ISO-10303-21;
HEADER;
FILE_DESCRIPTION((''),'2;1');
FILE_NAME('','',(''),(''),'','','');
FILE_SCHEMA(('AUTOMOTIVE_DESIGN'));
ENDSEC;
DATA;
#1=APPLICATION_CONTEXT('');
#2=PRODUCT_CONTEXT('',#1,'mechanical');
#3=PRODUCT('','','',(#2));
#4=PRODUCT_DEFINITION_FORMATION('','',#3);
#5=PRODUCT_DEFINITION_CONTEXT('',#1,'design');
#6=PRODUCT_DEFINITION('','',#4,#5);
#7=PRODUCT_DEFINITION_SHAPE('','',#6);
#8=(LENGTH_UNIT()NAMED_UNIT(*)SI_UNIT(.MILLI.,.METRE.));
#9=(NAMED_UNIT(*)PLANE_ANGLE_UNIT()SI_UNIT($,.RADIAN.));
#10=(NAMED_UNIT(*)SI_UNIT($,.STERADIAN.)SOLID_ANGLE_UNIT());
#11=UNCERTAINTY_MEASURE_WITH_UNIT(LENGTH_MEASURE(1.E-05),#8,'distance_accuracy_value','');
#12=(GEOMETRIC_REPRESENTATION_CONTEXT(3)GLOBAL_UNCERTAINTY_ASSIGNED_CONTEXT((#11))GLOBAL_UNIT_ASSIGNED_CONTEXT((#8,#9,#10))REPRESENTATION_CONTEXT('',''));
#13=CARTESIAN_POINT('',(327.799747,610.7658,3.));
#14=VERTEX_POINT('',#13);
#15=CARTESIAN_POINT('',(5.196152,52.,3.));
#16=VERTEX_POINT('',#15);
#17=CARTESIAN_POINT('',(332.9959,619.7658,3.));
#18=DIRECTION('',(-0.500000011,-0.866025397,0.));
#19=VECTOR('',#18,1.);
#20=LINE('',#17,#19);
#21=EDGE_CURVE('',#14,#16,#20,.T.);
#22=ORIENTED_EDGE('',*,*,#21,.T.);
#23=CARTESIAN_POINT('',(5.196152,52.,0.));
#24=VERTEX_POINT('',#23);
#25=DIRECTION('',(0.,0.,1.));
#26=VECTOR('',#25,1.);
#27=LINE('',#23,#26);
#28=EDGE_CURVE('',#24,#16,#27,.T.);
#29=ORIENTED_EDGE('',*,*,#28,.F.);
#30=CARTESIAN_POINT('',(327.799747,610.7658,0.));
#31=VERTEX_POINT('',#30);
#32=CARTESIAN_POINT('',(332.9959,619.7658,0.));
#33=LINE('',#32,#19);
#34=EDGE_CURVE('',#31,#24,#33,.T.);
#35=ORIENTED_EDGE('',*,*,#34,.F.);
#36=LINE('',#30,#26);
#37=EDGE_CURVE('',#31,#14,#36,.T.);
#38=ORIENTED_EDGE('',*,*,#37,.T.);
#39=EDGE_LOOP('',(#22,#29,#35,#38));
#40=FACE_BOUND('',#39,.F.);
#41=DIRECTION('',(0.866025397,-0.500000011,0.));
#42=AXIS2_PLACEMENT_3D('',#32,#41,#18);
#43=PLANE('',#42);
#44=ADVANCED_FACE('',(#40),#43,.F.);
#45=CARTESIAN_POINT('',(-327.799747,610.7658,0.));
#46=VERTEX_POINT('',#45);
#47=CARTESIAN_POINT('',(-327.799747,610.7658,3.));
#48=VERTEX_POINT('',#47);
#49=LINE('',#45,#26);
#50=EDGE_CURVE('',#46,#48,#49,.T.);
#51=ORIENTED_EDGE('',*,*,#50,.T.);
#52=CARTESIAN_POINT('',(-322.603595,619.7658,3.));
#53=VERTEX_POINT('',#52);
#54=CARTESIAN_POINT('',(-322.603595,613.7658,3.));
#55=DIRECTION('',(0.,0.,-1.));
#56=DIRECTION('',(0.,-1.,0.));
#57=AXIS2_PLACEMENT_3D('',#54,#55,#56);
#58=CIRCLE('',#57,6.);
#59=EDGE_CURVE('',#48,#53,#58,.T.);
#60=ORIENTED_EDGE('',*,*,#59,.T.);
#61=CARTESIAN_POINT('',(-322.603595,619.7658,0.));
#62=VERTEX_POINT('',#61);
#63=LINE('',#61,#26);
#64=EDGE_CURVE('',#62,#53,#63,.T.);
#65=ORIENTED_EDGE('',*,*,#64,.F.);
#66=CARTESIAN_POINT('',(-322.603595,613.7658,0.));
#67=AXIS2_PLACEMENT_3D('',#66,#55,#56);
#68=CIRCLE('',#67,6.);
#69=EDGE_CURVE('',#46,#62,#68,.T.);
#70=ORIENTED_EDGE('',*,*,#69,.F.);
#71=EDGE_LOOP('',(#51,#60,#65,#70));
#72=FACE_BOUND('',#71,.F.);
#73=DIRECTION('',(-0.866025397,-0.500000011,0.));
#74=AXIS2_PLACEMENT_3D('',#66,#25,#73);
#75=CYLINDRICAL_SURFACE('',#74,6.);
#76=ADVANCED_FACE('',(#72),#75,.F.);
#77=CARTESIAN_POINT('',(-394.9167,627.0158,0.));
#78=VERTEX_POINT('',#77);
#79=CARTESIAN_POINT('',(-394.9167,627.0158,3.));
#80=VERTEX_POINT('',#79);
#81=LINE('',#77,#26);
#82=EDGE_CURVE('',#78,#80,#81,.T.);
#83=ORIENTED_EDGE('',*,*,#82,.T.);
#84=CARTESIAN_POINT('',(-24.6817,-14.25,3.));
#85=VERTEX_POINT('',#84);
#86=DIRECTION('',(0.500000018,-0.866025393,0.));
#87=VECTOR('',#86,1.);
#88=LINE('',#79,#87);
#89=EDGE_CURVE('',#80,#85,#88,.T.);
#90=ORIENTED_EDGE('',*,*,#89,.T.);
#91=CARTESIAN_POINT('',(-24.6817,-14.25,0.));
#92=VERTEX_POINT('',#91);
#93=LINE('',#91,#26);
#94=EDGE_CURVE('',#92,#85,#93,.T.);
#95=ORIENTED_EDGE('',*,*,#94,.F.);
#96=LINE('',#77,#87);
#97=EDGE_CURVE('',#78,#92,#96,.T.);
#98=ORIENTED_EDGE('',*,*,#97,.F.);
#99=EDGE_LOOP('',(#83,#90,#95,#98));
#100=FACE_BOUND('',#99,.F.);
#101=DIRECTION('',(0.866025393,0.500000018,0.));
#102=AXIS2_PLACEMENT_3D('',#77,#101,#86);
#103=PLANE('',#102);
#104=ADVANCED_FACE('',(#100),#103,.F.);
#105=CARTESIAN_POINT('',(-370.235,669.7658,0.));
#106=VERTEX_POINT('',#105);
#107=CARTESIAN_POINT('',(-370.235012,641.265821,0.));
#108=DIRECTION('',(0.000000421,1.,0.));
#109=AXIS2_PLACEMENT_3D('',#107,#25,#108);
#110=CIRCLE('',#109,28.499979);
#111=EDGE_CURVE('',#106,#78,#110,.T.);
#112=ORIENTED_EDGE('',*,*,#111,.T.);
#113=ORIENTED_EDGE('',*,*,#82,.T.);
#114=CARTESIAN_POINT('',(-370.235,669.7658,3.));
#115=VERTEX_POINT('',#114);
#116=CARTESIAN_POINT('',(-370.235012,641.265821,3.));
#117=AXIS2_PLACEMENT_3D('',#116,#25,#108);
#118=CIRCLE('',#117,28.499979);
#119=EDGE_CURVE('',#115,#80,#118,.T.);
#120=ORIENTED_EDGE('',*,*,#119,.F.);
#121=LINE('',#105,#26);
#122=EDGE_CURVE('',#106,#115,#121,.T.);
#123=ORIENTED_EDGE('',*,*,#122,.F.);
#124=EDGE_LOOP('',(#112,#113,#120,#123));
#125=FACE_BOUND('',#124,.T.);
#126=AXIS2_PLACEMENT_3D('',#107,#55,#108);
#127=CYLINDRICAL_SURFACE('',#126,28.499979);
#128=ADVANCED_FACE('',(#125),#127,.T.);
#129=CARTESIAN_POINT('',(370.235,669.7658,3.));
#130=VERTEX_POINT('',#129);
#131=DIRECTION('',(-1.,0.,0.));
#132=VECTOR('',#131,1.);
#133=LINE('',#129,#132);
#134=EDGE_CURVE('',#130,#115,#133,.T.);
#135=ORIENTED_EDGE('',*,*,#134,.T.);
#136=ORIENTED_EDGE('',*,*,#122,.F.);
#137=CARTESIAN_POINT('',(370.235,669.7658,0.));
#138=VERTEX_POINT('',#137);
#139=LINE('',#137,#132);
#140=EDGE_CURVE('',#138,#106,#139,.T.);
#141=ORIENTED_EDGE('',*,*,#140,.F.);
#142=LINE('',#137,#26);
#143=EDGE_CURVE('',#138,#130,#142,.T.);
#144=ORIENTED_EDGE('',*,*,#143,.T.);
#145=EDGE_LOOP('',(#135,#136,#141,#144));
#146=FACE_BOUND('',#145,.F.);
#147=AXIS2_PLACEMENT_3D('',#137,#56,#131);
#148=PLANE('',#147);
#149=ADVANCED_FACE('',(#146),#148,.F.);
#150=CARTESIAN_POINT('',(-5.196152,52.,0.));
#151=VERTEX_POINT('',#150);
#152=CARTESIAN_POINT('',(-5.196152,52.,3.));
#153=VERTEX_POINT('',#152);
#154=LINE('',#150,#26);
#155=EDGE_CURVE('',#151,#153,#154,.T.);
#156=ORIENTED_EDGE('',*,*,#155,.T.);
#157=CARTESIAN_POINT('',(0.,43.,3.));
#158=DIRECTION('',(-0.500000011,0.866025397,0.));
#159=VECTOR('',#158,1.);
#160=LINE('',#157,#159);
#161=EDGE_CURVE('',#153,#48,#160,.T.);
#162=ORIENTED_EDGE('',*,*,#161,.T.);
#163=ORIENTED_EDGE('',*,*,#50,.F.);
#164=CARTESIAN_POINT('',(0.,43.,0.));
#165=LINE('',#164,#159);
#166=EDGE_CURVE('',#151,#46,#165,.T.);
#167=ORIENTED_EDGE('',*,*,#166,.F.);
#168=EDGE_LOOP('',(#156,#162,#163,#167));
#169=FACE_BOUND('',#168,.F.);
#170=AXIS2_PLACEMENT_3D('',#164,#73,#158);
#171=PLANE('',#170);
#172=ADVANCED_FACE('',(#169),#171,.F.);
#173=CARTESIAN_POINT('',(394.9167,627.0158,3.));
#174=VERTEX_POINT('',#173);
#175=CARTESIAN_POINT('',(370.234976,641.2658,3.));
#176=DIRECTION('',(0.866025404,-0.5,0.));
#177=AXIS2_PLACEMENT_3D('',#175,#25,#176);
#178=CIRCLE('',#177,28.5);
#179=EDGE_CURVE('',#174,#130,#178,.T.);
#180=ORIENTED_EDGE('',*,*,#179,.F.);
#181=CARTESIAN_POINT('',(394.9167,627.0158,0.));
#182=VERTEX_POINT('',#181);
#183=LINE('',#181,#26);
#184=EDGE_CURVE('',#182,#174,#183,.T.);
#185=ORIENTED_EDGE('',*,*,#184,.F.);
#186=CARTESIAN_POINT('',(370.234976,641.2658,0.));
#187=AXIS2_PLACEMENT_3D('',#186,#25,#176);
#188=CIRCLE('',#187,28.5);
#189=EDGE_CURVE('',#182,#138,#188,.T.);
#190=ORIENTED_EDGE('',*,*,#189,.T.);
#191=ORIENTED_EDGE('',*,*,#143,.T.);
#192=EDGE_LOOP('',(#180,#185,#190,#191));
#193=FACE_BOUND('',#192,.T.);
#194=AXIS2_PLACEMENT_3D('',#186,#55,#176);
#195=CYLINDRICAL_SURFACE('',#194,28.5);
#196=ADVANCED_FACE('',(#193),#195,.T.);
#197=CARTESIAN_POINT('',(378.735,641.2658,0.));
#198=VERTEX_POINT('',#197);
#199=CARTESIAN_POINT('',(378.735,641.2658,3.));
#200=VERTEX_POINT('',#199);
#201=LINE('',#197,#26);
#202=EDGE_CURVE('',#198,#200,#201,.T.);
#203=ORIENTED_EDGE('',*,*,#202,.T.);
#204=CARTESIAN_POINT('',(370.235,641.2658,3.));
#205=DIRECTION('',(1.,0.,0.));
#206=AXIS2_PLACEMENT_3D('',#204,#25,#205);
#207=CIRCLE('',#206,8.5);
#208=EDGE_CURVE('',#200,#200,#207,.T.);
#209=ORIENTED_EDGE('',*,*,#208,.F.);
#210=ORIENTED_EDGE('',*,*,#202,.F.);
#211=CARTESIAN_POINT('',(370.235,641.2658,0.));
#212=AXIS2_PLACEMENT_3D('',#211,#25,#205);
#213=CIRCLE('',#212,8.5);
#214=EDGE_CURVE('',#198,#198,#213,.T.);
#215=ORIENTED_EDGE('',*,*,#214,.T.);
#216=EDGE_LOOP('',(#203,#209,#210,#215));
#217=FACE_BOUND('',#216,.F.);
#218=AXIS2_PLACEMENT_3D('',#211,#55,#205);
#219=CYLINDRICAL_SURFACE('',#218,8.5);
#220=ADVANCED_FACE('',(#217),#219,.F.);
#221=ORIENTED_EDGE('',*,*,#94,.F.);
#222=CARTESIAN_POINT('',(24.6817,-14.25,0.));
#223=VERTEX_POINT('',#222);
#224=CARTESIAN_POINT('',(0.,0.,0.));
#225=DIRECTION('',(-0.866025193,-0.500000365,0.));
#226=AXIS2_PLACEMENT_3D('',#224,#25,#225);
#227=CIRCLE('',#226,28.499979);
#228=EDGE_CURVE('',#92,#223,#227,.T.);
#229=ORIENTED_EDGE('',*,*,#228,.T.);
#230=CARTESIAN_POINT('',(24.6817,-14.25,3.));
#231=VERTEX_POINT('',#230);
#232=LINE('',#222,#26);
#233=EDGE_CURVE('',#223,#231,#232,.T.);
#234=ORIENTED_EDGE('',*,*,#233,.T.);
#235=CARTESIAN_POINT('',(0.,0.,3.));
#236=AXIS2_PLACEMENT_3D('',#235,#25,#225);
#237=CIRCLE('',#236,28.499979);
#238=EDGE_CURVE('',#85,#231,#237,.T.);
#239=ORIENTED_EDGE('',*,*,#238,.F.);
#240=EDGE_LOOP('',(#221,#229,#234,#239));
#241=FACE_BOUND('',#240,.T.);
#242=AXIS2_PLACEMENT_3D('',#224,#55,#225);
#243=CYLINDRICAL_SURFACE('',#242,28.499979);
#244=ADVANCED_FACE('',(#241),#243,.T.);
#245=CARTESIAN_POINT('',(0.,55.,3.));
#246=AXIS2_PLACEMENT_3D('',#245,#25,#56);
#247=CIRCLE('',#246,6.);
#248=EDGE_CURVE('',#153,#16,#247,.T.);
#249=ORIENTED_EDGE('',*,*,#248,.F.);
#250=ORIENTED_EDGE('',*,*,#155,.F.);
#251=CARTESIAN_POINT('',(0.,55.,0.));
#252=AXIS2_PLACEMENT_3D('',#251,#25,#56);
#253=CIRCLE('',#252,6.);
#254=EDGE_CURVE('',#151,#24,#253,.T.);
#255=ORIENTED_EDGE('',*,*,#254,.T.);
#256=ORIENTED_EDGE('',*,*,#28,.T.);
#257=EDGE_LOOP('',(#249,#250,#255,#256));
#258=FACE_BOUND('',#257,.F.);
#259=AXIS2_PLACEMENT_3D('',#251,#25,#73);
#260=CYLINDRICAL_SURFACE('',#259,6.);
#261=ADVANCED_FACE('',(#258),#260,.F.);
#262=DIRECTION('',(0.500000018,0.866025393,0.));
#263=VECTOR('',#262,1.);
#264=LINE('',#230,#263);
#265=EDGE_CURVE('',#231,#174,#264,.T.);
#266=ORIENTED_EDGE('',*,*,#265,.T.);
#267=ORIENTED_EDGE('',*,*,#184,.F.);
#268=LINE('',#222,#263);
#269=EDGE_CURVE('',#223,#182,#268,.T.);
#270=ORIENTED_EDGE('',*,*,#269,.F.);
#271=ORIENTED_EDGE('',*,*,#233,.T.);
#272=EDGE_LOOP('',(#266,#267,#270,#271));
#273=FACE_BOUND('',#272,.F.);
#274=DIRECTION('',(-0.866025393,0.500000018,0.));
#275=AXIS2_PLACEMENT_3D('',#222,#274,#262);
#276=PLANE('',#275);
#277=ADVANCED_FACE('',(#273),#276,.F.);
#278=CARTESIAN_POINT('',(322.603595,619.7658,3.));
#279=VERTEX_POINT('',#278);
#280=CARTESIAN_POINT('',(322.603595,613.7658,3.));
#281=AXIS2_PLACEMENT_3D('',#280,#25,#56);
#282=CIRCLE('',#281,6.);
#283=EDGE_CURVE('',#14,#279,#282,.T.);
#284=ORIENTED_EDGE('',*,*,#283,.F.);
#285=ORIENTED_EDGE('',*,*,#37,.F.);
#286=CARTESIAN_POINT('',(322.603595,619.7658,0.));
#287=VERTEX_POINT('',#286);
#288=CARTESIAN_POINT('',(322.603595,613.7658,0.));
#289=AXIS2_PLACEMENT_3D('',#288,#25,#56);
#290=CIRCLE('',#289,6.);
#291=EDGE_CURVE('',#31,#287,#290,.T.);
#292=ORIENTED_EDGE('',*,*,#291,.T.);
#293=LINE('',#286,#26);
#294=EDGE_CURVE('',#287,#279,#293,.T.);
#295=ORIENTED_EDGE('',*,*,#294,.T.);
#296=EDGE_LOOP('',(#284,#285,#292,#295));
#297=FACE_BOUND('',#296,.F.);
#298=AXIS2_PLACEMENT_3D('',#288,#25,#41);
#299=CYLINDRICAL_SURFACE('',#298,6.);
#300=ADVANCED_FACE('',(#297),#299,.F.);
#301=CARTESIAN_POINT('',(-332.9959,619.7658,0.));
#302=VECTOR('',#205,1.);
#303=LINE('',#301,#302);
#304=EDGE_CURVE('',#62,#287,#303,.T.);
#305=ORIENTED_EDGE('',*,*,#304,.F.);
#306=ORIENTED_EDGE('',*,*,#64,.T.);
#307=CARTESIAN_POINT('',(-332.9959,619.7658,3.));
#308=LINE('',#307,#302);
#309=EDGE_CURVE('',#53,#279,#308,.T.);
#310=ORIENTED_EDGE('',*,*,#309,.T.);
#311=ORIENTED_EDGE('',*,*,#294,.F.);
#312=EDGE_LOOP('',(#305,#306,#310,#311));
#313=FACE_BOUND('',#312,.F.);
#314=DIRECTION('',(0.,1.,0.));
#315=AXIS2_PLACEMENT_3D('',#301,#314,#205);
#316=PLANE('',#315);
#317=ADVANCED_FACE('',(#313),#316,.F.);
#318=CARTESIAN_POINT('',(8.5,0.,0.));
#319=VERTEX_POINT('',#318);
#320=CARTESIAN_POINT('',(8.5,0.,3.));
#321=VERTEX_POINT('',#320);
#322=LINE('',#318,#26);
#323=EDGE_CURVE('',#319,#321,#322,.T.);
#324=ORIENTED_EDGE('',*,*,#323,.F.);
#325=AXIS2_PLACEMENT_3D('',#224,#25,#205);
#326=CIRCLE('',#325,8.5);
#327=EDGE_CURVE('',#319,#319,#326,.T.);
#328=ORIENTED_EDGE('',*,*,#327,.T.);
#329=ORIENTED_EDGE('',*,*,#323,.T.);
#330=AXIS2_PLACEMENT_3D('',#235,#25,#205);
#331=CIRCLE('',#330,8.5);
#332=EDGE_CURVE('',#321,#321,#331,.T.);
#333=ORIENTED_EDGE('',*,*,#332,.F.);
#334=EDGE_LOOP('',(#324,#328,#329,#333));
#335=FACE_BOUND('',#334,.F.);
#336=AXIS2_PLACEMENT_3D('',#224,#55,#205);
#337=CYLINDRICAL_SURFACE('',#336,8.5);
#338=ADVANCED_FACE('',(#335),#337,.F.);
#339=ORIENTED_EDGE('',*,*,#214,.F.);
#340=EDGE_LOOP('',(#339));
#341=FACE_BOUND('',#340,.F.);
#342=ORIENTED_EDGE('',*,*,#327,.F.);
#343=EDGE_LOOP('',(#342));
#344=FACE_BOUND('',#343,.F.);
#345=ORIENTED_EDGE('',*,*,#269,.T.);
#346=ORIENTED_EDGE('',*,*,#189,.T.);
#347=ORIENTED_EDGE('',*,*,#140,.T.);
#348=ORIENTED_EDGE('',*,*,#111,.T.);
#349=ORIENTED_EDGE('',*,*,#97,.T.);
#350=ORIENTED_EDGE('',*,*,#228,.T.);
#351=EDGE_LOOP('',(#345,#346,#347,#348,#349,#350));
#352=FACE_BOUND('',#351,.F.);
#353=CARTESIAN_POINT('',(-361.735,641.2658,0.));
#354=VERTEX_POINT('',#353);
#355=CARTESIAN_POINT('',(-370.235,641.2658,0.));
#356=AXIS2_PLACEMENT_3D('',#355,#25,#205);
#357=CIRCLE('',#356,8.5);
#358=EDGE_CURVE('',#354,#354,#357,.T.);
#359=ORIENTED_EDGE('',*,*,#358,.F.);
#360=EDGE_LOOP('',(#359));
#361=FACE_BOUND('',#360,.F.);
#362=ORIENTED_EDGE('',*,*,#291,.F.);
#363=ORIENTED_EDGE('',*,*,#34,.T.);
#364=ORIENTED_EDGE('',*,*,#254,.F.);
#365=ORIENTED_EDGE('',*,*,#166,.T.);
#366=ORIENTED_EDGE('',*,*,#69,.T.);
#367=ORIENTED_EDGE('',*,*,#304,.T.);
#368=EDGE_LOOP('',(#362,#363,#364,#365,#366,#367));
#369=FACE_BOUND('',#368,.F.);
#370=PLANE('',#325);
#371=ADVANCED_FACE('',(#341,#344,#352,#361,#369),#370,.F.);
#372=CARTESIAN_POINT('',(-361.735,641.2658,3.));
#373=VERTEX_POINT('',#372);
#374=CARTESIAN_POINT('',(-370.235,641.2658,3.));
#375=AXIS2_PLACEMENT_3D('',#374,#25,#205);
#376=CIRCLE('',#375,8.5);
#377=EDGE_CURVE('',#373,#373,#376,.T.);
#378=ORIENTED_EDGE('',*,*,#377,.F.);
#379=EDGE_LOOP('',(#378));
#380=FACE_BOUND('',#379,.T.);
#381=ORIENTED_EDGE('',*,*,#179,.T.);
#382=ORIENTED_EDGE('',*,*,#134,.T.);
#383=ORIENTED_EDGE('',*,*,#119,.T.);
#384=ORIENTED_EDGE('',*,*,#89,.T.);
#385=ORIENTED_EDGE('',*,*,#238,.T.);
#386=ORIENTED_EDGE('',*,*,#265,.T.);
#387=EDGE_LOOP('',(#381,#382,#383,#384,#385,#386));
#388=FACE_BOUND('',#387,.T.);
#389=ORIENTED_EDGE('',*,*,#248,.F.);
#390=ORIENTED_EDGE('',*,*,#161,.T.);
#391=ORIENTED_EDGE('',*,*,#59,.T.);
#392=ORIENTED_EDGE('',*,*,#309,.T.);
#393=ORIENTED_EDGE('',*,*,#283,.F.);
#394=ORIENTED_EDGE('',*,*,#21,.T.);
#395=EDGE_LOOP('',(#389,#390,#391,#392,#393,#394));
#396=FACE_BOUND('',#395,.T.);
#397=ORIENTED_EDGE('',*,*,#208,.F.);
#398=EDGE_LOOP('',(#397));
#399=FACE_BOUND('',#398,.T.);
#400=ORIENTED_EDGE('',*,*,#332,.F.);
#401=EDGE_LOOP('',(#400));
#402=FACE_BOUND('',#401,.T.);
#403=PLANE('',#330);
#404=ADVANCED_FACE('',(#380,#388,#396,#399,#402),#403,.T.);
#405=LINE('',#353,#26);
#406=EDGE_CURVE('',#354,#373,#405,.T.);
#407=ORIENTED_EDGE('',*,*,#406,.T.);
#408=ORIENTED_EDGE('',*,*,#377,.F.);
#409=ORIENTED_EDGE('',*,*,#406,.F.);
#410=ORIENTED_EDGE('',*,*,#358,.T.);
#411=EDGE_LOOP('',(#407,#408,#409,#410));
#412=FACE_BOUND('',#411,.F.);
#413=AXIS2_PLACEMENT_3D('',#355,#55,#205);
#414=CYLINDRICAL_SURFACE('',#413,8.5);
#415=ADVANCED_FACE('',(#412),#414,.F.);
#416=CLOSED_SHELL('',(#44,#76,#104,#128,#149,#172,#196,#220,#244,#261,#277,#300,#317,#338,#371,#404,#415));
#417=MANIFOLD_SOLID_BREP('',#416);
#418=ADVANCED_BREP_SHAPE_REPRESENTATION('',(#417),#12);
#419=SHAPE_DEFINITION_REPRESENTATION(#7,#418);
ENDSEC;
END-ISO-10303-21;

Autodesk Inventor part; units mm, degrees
ref_plane "YZ Plane" through (0, 0, 0) normal (1, 0, 0) x (0, 1, 0)
ref_plane "XZ Plane" through (0, 0, 0) normal (0, 1, 0) x (-1, 0, 0)
ref_plane "XY Plane" through (0, 0, 0) normal (0, 0, 1) x (1, 0, 0)
sketch "Sketch1" plane through (0, 0, 0) normal (0, 0, 1) x (1, 0, 0)
  circle A0 centre (0, 0) radius 8.5
  line L0 (-394.9167, 627.0158) -> (-24.6817, -14.25)
  arc A1 (-24.6817, -14.25) -> (24.6817, -14.25) centre (0, 0) ccw
  line L1 (24.6817, -14.25) -> (394.9167, 627.0158)
  arc A2 (394.9167, 627.0158) -> (370.235, 669.7658) centre (370.235, 641.2658) ccw
  line L2 (370.235, 669.7658) -> (-370.235, 669.7658)
  arc A3 (-370.235, 669.7658) -> (-394.9167, 627.0158) centre (-370.235, 641.2658) ccw
  line L3 (0, 0) -> (0, 669.7658) construction
  line L4 (-332.9959, 619.7658) -> (332.9959, 619.7658)
  line L5 (332.9959, 619.7658) -> (0, 43)
  line L6 (0, 43) -> (-332.9959, 619.7658)
  circle A4 centre (-370.235, 641.2658) radius 8.5
  circle A5 centre (370.235, 641.2658) radius 8.5
  dimension "d34" = 17
  dimension "d35" = 20
  dimension "d36" = 740.47
  dimension "d37" = 740.47
  dimension "d38" = 50
extrude "Plate1" add sketch "Sketch1" along normal blind 3
fillet "Corner Round3" radius 6 3 edges at (-332.9959, 619.7658, 1.5) (0, 43, 1.5) (332.9959, 619.7658, 1.5)
equation "\"d37\" = d36"
equation "\"d2\" = Thickness"
equation "\"BendReliefWidth\" = Thickness"
equation "\"BendReliefDepth\" = 0.5 * Thickness"
equation "\"CornerReliefSize\" = 4 * Thickness"
equation "\"MinimumRemnant\" = 2 * Thickness"
equation "\"TransitionRadius\" = BendRadius"
equation "\"JacobiRadiusSize\" = BendRadius"
equation "\"GapSize\" = Thickness"
equation "\"Thickness\" = 3"
equation "\"BendRadius\" = 5"
properties part number "PNS-689 leg floor pattern" material "Stainless Steel"
